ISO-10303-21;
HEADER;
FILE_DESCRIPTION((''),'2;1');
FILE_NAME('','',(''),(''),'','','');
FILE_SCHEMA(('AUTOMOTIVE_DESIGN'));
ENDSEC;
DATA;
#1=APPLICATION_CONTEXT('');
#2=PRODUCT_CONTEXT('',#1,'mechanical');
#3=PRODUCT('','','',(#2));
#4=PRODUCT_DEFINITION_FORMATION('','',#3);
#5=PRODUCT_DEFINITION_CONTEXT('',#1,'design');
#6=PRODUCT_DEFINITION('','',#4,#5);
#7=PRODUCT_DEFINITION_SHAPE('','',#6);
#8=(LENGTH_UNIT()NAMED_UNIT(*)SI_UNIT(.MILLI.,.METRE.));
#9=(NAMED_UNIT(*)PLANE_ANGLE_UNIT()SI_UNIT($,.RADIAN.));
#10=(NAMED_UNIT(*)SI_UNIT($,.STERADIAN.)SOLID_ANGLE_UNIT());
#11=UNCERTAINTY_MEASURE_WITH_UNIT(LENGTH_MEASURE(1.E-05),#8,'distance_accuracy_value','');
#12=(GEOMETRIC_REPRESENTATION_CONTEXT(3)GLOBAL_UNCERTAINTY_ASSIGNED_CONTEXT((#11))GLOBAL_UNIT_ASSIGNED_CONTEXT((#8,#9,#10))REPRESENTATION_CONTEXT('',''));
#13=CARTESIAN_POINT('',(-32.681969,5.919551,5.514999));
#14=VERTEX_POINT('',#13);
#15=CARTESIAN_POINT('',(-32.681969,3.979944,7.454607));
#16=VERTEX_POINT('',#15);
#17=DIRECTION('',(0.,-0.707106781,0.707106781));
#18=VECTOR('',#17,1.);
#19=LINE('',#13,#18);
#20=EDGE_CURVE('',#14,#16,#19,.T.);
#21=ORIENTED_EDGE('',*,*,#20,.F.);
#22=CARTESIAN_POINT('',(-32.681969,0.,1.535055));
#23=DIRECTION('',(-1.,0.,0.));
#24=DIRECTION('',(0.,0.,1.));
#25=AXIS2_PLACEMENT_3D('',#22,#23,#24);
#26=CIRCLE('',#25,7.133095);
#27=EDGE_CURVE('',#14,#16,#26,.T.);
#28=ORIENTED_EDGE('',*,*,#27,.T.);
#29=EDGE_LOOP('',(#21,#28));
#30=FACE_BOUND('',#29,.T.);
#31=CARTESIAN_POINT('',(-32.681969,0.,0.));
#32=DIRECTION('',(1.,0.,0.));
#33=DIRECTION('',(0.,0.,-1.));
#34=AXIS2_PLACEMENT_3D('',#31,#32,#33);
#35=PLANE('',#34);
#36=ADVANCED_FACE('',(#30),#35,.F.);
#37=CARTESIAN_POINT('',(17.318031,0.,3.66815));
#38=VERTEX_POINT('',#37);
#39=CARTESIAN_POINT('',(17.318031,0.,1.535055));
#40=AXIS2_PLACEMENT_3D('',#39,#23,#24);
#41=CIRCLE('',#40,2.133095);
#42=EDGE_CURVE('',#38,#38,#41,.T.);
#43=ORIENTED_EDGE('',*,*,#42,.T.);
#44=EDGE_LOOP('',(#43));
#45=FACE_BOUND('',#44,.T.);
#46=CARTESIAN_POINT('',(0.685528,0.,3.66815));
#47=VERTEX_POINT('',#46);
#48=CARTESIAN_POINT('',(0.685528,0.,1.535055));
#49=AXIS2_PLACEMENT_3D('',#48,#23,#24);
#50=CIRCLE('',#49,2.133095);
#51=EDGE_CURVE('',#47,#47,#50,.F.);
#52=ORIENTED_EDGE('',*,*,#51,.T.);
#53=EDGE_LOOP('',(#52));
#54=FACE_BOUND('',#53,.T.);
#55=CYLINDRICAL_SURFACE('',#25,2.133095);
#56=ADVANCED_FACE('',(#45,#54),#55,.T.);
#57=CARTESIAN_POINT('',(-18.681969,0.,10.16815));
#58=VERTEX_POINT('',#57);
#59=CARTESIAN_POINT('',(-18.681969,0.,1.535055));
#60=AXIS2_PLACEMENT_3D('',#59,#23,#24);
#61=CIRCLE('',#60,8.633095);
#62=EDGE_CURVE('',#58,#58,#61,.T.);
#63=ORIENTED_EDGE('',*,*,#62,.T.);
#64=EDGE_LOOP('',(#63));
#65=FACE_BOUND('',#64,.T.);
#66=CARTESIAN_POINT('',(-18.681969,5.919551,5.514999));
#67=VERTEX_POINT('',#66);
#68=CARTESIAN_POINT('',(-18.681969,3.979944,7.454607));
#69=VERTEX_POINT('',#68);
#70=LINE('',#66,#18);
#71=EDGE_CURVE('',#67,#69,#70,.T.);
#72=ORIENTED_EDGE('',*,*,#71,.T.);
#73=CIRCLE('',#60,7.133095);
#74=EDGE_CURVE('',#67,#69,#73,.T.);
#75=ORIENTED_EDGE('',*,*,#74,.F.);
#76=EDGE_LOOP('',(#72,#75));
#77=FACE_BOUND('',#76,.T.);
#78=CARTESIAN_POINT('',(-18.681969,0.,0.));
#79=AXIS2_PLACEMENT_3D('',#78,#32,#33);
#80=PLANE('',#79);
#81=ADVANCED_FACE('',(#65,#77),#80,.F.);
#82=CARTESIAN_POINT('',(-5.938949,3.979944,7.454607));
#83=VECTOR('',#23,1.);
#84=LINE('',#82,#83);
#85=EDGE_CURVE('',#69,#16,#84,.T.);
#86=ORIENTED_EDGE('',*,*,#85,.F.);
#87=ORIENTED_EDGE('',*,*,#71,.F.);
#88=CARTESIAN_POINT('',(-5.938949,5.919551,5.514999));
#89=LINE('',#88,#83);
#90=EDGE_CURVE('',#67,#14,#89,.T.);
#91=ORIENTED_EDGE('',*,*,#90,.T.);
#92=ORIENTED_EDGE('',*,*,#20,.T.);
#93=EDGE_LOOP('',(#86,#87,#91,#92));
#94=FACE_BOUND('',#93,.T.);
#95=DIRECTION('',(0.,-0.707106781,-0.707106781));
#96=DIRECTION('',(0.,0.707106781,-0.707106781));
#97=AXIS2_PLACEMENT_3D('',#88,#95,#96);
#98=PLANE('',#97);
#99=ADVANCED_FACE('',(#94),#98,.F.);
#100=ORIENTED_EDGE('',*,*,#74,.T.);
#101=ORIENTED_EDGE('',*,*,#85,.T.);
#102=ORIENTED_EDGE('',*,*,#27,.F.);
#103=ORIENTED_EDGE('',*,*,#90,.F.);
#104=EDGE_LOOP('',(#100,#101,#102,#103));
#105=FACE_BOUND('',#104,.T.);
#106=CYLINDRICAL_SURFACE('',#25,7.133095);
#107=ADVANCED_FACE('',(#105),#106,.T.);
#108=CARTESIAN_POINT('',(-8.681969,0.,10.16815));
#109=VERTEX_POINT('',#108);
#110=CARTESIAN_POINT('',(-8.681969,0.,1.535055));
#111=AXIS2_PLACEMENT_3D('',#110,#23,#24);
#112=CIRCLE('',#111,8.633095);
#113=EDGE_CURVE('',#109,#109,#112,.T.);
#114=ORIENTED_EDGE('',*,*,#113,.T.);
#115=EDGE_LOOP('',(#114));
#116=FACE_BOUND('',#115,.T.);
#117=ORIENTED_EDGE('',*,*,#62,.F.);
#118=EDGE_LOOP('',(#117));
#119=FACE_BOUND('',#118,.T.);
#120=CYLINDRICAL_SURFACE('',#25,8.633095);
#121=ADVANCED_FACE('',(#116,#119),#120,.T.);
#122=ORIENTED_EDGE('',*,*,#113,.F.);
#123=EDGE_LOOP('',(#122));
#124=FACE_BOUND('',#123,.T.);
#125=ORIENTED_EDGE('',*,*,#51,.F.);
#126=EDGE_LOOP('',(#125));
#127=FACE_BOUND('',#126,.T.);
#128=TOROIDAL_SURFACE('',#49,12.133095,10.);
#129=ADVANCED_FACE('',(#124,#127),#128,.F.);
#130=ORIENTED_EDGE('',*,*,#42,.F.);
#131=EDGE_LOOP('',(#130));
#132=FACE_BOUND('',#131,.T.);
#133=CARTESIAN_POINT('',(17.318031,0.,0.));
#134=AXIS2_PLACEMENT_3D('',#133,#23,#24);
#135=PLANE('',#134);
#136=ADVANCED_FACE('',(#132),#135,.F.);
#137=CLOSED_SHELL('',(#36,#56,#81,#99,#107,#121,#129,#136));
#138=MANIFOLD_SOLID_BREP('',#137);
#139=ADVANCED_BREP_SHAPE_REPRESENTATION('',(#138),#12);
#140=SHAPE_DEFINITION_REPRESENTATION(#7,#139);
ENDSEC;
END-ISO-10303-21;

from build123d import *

# Parameters (mm, degrees)
SKETCH_1_W          = 14
SKETCH_1_H          = 7.133094656938376
FILLET_1_R          = 10
CUT_EXTRUDE_1_DEPTH = 14


with BuildPart() as part:
    # 草图1 → 旋转1 (revolve)
    with BuildSketch(Plane(origin=(0, 0, 0), x_dir=(1, 0, 0), z_dir=(0, 1, 0)), mode=Mode.PRIVATE) as revolve_1_sk:
        with Locations((-25.681968733439298, 2.0314918872170904)):
            Rectangle(SKETCH_1_W, SKETCH_1_H)
        Polygon((-18.681968733439298, 5.598039215686279), (-18.681968733439298, -1.535055441252097), (-8.681968733439298, -1.5350554412520978), (-8.681968733439302, 0.5980392156862795), (-8.681968733439302, 7.098039215686279), (-18.681968733439298, 7.098039215686279), align=None)
        Polygon((-8.681968733439302, 0.5980392156862795), (-8.681968733439302, -1.535055441252097), (17.318031266560702, -1.5350554412520978), (17.318031266560705, 0.5980392156862795), align=None)
    revolve(revolve_1_sk.sketch.rotate(Axis((-32.6819687334393, 0, 1.5350554412520978), (1, 0, 0)), 180), axis=Axis((-32.6819687334393, 0, 1.5350554412520978), (1, 0, 0)))

    # 圆角1
    # the kernel refuses this fillet: 10 mm, written as the material it adds along each edge
    with BuildSketch(Plane(origin=(-8.681968733439302, 0, 1.5350554412520978), x_dir=(0, 1.2e-16, 1), z_dir=(0, 1, -1.2e-16))) as fillet_1_piece_1:
        with BuildLine():
            CenterArc((12.133094656938377, 9.367496997597598), FILLET_1_R, 180, 69.51268488527734)
            Line((2.1330946569383773, 9.367496997597598), (1.9330946569383771, 9.367496997597598))
            Line((1.9330946569383771, 9.367496997597598), (1.9330946569383771, 0))
            Line((1.9330946569383771, 0), (2.1330946569383773, -0.1999999999999993))
            ThreePointArc((2.1330946569383773, -0.1999999999999993), (5.383094656938376, -0.1999999999999993), (8.563094656938375, -0.18734993995195026))
            Line((8.563094656938375, -0.18734993995195026), (8.633094656938376, 1.78e-15))
        make_face()
    revolve(axis=Axis((-8.681968733439302, 0, 1.5350554412520978), (1, 0, 0)))

    # 草图2 → 切除-拉伸-薄壁1 (cut)
    with BuildSketch(Plane.ZY.offset(32.6819687334393)):
        Polygon((5.514998964205359, 5.919551413658403), (7.454606854910501, 3.979943522953262), (14.525674666775975, 11.051011334818739), (12.586066776070833, 12.99061922552388), align=None)
    extrude(amount=-CUT_EXTRUDE_1_DEPTH, mode=Mode.SUBTRACT)


solid = part.part
